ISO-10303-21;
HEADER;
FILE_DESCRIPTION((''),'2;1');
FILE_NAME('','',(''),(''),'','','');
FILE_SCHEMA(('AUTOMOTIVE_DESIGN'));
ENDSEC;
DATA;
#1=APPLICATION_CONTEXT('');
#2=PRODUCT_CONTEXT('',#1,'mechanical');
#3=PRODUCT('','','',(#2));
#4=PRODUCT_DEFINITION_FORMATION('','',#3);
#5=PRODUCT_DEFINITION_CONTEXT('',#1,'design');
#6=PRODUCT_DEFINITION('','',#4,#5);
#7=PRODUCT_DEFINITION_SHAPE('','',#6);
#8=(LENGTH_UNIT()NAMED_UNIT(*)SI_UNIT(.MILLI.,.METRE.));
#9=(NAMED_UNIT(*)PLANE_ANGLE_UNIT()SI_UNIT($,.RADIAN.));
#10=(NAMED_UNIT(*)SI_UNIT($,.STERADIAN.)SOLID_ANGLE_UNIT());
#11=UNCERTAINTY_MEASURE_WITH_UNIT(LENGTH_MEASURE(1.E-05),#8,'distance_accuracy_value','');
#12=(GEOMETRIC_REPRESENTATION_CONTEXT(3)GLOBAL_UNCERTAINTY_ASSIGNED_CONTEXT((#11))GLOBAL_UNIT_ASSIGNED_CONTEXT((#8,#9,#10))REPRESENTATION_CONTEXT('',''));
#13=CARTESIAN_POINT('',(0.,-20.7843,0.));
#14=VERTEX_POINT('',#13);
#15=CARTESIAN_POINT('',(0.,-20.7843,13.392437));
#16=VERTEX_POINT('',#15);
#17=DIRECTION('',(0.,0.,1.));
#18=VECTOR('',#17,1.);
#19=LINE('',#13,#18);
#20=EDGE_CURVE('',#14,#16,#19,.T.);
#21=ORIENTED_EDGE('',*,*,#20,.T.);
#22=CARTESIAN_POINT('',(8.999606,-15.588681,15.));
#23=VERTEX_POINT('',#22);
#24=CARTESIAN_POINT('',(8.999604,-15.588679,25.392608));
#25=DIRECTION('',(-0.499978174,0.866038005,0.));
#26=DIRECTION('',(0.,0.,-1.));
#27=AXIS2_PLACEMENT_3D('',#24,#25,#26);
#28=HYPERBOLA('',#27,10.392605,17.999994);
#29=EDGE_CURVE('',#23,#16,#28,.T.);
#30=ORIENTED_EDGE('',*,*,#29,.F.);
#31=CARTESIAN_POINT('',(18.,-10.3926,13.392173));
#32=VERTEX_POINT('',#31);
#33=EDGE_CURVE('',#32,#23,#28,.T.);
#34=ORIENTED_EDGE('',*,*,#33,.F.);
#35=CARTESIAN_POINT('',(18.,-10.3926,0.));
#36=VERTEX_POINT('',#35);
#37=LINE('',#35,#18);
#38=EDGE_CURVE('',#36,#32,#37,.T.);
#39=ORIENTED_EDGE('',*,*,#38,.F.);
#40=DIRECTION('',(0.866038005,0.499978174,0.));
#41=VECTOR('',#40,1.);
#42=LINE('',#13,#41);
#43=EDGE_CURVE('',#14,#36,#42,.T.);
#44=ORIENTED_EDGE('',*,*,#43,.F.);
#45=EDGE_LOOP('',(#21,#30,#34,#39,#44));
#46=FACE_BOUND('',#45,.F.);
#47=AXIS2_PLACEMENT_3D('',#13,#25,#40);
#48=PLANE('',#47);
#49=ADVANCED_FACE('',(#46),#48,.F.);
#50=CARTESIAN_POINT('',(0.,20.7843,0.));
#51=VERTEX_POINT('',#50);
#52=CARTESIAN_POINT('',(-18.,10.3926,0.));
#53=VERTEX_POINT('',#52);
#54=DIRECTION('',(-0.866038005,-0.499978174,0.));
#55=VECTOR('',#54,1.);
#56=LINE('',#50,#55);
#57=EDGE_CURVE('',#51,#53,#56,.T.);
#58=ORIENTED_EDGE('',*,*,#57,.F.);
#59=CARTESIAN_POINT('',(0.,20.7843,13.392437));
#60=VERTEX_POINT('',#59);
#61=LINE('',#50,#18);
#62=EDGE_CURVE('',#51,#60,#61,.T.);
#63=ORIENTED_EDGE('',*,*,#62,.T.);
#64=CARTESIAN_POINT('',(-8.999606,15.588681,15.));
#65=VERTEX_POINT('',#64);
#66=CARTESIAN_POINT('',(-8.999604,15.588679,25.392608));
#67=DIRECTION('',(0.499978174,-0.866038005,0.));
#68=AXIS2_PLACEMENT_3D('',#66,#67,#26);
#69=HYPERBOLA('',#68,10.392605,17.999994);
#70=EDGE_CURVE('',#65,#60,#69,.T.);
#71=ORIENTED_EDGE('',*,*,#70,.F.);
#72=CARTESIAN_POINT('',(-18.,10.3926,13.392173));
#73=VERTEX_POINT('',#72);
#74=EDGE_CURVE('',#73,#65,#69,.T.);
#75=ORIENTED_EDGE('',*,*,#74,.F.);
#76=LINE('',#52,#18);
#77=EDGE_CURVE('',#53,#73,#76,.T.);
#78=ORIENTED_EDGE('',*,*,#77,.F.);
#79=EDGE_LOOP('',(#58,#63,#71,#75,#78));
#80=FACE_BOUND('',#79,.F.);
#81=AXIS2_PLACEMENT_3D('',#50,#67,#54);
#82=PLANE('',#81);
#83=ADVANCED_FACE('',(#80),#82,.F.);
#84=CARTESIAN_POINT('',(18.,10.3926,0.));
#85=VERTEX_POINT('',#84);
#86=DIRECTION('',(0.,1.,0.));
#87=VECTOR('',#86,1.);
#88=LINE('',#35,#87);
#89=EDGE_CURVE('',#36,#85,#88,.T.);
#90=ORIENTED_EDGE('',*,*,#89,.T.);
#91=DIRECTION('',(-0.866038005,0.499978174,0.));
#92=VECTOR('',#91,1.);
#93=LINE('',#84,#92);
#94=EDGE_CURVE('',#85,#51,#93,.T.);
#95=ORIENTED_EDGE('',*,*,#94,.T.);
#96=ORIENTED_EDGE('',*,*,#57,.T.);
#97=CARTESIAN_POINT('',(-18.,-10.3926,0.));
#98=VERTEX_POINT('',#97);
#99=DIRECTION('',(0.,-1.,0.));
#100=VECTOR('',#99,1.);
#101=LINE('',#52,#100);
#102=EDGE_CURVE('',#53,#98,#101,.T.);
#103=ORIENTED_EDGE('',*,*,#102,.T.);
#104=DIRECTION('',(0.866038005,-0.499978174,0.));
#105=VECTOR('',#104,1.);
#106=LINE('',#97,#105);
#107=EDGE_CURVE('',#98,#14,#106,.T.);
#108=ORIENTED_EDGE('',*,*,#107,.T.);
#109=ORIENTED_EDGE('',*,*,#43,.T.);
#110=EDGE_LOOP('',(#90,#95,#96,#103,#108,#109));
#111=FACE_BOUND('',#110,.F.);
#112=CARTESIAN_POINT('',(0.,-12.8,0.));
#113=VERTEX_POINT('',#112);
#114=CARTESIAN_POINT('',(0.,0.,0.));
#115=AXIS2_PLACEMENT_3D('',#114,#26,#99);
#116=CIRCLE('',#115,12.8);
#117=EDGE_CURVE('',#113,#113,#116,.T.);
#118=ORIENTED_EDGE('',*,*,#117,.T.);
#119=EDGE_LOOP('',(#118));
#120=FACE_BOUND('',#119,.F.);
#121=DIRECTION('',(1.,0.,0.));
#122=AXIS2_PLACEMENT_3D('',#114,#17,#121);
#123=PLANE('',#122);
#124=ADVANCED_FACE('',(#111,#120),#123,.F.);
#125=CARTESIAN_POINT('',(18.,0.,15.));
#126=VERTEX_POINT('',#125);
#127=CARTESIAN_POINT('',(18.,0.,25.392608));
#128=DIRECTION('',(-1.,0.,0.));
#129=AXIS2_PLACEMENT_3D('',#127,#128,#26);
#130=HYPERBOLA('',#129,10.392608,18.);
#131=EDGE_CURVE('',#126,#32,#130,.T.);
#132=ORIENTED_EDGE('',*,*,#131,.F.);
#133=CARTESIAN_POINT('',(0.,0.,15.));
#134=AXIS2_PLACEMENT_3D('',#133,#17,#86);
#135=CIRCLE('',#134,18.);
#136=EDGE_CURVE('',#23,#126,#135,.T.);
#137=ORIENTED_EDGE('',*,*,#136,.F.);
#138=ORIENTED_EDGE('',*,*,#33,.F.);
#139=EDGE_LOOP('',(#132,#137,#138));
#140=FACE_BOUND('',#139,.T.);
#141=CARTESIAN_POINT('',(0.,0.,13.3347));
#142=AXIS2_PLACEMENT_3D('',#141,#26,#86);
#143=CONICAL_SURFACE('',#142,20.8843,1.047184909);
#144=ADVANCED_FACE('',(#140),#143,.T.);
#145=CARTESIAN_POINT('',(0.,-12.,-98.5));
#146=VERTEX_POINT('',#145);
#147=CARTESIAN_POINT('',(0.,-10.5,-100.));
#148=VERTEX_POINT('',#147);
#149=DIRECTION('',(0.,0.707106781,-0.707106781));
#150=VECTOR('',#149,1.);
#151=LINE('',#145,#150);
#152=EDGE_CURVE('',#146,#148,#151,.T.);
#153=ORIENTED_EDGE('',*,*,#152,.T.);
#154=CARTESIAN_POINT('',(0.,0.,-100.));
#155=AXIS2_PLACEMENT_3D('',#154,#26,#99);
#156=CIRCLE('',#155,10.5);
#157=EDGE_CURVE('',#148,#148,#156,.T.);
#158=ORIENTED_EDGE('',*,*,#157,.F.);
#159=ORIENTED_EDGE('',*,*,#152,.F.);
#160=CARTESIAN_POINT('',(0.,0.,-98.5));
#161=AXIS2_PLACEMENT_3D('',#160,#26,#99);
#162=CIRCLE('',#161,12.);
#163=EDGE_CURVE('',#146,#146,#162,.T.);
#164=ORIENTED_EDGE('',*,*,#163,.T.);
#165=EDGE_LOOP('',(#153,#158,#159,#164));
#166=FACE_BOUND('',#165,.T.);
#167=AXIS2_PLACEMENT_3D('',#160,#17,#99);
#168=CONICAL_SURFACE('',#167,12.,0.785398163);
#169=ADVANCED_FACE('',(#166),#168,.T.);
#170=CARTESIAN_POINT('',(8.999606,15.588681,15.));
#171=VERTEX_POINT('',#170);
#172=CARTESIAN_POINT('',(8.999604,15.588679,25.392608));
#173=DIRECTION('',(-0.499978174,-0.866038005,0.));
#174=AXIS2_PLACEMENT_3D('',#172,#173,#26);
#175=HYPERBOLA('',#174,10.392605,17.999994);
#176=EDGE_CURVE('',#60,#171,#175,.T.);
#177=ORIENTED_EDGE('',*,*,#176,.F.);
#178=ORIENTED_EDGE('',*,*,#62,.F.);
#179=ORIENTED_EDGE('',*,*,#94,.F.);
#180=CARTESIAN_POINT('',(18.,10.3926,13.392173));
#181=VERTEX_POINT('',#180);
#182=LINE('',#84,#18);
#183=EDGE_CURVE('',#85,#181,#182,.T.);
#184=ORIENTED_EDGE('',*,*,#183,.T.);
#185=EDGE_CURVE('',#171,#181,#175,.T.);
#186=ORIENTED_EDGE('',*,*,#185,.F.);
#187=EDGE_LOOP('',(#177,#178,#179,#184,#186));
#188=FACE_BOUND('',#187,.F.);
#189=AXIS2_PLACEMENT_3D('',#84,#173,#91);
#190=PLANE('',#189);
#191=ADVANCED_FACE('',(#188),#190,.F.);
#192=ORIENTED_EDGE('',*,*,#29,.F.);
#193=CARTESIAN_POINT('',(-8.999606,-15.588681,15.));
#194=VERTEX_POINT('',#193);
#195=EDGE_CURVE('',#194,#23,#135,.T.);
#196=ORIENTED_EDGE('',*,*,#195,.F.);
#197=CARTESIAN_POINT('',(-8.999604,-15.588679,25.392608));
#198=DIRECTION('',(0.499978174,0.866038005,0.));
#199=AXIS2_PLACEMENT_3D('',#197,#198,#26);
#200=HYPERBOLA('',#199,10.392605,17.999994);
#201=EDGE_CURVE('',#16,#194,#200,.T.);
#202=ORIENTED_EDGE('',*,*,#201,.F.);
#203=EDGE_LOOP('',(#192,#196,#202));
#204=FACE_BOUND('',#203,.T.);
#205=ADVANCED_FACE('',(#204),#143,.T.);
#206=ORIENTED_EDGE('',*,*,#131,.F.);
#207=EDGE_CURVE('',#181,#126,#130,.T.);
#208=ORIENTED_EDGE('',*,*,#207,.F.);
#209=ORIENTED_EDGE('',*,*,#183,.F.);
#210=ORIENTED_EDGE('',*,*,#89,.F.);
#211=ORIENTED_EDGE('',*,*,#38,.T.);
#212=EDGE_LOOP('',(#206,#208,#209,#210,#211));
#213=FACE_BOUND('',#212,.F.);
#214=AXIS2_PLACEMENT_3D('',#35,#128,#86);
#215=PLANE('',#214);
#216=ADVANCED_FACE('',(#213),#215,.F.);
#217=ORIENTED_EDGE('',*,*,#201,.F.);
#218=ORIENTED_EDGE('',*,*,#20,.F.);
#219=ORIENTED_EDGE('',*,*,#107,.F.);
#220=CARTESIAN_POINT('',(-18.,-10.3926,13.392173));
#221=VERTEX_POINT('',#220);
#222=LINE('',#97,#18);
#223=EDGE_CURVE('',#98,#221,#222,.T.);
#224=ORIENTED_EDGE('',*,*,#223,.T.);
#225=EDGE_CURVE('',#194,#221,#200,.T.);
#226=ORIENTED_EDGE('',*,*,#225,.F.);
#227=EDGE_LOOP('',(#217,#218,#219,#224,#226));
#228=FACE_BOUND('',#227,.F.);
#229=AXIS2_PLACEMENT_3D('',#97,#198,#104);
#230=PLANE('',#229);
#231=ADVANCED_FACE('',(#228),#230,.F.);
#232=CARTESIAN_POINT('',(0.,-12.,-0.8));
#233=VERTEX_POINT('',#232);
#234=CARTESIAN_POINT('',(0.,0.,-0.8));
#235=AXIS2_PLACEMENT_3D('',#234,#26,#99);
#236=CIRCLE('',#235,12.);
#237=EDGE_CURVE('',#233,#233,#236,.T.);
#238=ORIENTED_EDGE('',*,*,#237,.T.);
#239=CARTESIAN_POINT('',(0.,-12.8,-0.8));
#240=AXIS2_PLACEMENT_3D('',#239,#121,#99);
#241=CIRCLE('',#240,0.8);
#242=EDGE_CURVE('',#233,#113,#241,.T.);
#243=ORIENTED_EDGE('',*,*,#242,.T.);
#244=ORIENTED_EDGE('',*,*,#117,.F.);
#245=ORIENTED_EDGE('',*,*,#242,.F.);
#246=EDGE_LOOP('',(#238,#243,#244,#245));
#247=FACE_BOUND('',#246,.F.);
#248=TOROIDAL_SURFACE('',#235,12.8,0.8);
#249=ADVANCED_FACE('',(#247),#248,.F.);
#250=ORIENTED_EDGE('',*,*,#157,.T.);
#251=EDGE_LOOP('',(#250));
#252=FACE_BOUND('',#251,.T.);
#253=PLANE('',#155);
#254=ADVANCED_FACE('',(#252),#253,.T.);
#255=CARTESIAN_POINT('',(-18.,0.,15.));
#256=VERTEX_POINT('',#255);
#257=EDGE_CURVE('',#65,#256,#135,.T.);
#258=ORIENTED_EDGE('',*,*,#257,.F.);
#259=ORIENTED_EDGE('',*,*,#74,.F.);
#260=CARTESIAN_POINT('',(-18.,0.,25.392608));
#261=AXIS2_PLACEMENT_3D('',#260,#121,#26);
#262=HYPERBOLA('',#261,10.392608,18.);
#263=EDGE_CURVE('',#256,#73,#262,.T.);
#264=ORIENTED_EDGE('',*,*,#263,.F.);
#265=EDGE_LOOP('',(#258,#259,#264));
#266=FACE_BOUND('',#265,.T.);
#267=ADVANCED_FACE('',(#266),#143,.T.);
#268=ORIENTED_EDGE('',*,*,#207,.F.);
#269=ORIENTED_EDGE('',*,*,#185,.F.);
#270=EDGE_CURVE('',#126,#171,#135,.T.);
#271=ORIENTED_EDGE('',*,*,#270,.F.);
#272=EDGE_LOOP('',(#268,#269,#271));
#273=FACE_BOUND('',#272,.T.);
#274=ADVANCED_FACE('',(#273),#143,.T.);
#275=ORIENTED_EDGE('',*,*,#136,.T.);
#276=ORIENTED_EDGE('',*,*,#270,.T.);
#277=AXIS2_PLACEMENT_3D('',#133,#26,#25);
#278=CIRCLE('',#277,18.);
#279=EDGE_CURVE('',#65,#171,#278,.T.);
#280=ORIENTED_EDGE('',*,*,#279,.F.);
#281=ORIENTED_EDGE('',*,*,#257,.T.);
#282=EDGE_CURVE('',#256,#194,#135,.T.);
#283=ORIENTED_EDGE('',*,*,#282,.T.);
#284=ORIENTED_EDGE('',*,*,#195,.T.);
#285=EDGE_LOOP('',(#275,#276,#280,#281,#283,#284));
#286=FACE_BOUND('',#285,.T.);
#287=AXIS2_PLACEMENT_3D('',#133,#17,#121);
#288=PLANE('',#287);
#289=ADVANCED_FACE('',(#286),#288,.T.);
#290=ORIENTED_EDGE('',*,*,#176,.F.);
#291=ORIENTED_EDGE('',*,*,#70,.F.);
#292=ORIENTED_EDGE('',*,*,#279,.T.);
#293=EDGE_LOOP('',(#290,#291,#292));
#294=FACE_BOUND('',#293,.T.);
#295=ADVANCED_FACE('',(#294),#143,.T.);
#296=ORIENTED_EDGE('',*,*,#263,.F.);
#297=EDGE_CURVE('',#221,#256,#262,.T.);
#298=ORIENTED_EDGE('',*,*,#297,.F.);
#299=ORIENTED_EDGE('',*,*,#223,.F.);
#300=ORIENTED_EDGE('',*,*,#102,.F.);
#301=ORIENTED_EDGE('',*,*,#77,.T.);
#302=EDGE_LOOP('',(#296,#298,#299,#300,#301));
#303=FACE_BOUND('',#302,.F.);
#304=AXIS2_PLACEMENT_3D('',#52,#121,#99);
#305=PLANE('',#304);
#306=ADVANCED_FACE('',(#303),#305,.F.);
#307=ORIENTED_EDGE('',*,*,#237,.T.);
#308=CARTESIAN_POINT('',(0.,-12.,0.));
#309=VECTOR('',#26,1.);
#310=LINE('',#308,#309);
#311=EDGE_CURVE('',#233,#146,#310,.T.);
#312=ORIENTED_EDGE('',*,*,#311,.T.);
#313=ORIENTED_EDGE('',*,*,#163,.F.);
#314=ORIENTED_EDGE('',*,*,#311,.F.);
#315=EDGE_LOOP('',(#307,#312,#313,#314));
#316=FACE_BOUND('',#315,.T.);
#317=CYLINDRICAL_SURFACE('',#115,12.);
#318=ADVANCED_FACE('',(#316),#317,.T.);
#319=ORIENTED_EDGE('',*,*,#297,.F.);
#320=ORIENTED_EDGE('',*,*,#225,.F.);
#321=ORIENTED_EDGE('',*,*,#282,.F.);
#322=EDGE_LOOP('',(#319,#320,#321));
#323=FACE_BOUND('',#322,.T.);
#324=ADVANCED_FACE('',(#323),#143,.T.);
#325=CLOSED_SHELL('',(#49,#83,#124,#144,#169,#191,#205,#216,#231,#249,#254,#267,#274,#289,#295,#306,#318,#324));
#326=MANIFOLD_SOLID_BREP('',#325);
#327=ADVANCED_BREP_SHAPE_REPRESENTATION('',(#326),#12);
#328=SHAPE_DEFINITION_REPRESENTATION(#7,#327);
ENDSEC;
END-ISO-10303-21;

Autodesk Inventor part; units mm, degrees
ref_plane "WorkPlane1" through (0, 0, 0) normal (0, 0, 1) x (1, 0, 0)
sketch "Sketch1" plane through (0, 0, 0) normal (0, 0, 1) x (1, 0, 0)
  point P0 (0, 0)
sketch "Sketch2" plane through (0, 0, 0) normal (0, 0, 1) x (1, 0, 0)
  line L0 (-18, 10.3926) -> (-18, -10.3926)
  line L1 (0, 20.7843) -> (-18, 10.3926)
  line L2 (18, 10.3926) -> (0, 20.7843)
  line L3 (18, -10.3926) -> (18, 10.3926)
  line L4 (0, -20.7843) -> (18, -10.3926)
  line L5 (-18, -10.3926) -> (0, -20.7843)
  circle A0 centre (0, 0) radius 18 construction
  dimension "d1" = 36
  dimension "d29" = 0
  dimension "d30" = 0
extrude "Extrusion1" add sketch "Sketch2" along normal blind 15
sketch "Sketch3" plane through (0, 0, 0) normal (1, 0, 0) x (0, 1, 0)
  line L0 (18, 15) -> (20.8843, 15)
  line L1 (20.8843, 13.3347) -> (18, 15)
  line L2 (20.8843, 15) -> (20.8843, 13.3347)
  line L3 (0, -3) -> (0, 18) projected
  line L4 (20.7843, 0) -> (20.7843, 15) projected
  dimension "d25" = 0.1
  dimension "d26" = 0
  dimension "d27" = 60
  dimension "d28" = 18
revolve "Revolution1" cut sketch "Sketch3" angle 360 about axis through (0, 0, -10) along (0, 0, 1)
sketch "Sketch4" plane through (0, 0, 0) normal (1, 0, 0) x (0, 1, 0)
  line L0 (0, -100) -> (0, 0)
  line L1 (-12, -100) -> (0, -100)
  line L2 (-12, 0) -> (-12, -100)
  line L3 (0, 0) -> (-12, 0)
  line L4 (0, -100) -> (0, 0)
  line L5 (-14.4, 0) -> (2.4, 0) projected
  line L6 (0, -120) -> (0, 20) projected
  dimension "d18" = 12
  dimension "d20" = 100
  dimension "d33" = 0
  dimension "d34" = 0
revolve "Revolution2" add sketch "Sketch4" angle 360 about axis through (0, 0, -100) along (0, 0, -1)
chamfer "Chamfer1" distance 1.5 angle 45 1 edges at (0, 12, -100)
fillet "Fillet1" radius 0.8 1 edges at (0, 12, 0)
thread "Thread1" size "M24x3" class "6g" standard "ISO Metric profile" length 54
ref_plane "MSC_PF1" through (0, 0, 0) normal (1, 0, 0) x (0, 1, 0)
ref_plane "MSC_PT1" through (0, 0, 0) normal (0, 0, -1) x (-1, 0, 0)
equation "\"d22\" = 0.5 * PTC"
equation "\"d23\" = 0.5 * PTC"
equation "\"d24\" = r"
equation "\"d1\" = ParS"
equation "\"d6\" = ParK"
equation "\"d28\" = 0.5 * ParS"
equation "\"d18\" = 0.5 * NND"
equation "\"d20\" = NLG"
equation "\"NND\" = 24"
equation "\"NLG\" = 100"
equation "\"PTC\" = 3"
equation "\"ParK\" = 15"
equation "\"ParS\" = 36"
equation "\"msp_es\" = 0.577367 * ParS"
equation "\"r\" = 0.8"
equation "\"THREADDIA\" = NND"
properties part number "ISO 4016 - M24 x 100" material "Steel"
